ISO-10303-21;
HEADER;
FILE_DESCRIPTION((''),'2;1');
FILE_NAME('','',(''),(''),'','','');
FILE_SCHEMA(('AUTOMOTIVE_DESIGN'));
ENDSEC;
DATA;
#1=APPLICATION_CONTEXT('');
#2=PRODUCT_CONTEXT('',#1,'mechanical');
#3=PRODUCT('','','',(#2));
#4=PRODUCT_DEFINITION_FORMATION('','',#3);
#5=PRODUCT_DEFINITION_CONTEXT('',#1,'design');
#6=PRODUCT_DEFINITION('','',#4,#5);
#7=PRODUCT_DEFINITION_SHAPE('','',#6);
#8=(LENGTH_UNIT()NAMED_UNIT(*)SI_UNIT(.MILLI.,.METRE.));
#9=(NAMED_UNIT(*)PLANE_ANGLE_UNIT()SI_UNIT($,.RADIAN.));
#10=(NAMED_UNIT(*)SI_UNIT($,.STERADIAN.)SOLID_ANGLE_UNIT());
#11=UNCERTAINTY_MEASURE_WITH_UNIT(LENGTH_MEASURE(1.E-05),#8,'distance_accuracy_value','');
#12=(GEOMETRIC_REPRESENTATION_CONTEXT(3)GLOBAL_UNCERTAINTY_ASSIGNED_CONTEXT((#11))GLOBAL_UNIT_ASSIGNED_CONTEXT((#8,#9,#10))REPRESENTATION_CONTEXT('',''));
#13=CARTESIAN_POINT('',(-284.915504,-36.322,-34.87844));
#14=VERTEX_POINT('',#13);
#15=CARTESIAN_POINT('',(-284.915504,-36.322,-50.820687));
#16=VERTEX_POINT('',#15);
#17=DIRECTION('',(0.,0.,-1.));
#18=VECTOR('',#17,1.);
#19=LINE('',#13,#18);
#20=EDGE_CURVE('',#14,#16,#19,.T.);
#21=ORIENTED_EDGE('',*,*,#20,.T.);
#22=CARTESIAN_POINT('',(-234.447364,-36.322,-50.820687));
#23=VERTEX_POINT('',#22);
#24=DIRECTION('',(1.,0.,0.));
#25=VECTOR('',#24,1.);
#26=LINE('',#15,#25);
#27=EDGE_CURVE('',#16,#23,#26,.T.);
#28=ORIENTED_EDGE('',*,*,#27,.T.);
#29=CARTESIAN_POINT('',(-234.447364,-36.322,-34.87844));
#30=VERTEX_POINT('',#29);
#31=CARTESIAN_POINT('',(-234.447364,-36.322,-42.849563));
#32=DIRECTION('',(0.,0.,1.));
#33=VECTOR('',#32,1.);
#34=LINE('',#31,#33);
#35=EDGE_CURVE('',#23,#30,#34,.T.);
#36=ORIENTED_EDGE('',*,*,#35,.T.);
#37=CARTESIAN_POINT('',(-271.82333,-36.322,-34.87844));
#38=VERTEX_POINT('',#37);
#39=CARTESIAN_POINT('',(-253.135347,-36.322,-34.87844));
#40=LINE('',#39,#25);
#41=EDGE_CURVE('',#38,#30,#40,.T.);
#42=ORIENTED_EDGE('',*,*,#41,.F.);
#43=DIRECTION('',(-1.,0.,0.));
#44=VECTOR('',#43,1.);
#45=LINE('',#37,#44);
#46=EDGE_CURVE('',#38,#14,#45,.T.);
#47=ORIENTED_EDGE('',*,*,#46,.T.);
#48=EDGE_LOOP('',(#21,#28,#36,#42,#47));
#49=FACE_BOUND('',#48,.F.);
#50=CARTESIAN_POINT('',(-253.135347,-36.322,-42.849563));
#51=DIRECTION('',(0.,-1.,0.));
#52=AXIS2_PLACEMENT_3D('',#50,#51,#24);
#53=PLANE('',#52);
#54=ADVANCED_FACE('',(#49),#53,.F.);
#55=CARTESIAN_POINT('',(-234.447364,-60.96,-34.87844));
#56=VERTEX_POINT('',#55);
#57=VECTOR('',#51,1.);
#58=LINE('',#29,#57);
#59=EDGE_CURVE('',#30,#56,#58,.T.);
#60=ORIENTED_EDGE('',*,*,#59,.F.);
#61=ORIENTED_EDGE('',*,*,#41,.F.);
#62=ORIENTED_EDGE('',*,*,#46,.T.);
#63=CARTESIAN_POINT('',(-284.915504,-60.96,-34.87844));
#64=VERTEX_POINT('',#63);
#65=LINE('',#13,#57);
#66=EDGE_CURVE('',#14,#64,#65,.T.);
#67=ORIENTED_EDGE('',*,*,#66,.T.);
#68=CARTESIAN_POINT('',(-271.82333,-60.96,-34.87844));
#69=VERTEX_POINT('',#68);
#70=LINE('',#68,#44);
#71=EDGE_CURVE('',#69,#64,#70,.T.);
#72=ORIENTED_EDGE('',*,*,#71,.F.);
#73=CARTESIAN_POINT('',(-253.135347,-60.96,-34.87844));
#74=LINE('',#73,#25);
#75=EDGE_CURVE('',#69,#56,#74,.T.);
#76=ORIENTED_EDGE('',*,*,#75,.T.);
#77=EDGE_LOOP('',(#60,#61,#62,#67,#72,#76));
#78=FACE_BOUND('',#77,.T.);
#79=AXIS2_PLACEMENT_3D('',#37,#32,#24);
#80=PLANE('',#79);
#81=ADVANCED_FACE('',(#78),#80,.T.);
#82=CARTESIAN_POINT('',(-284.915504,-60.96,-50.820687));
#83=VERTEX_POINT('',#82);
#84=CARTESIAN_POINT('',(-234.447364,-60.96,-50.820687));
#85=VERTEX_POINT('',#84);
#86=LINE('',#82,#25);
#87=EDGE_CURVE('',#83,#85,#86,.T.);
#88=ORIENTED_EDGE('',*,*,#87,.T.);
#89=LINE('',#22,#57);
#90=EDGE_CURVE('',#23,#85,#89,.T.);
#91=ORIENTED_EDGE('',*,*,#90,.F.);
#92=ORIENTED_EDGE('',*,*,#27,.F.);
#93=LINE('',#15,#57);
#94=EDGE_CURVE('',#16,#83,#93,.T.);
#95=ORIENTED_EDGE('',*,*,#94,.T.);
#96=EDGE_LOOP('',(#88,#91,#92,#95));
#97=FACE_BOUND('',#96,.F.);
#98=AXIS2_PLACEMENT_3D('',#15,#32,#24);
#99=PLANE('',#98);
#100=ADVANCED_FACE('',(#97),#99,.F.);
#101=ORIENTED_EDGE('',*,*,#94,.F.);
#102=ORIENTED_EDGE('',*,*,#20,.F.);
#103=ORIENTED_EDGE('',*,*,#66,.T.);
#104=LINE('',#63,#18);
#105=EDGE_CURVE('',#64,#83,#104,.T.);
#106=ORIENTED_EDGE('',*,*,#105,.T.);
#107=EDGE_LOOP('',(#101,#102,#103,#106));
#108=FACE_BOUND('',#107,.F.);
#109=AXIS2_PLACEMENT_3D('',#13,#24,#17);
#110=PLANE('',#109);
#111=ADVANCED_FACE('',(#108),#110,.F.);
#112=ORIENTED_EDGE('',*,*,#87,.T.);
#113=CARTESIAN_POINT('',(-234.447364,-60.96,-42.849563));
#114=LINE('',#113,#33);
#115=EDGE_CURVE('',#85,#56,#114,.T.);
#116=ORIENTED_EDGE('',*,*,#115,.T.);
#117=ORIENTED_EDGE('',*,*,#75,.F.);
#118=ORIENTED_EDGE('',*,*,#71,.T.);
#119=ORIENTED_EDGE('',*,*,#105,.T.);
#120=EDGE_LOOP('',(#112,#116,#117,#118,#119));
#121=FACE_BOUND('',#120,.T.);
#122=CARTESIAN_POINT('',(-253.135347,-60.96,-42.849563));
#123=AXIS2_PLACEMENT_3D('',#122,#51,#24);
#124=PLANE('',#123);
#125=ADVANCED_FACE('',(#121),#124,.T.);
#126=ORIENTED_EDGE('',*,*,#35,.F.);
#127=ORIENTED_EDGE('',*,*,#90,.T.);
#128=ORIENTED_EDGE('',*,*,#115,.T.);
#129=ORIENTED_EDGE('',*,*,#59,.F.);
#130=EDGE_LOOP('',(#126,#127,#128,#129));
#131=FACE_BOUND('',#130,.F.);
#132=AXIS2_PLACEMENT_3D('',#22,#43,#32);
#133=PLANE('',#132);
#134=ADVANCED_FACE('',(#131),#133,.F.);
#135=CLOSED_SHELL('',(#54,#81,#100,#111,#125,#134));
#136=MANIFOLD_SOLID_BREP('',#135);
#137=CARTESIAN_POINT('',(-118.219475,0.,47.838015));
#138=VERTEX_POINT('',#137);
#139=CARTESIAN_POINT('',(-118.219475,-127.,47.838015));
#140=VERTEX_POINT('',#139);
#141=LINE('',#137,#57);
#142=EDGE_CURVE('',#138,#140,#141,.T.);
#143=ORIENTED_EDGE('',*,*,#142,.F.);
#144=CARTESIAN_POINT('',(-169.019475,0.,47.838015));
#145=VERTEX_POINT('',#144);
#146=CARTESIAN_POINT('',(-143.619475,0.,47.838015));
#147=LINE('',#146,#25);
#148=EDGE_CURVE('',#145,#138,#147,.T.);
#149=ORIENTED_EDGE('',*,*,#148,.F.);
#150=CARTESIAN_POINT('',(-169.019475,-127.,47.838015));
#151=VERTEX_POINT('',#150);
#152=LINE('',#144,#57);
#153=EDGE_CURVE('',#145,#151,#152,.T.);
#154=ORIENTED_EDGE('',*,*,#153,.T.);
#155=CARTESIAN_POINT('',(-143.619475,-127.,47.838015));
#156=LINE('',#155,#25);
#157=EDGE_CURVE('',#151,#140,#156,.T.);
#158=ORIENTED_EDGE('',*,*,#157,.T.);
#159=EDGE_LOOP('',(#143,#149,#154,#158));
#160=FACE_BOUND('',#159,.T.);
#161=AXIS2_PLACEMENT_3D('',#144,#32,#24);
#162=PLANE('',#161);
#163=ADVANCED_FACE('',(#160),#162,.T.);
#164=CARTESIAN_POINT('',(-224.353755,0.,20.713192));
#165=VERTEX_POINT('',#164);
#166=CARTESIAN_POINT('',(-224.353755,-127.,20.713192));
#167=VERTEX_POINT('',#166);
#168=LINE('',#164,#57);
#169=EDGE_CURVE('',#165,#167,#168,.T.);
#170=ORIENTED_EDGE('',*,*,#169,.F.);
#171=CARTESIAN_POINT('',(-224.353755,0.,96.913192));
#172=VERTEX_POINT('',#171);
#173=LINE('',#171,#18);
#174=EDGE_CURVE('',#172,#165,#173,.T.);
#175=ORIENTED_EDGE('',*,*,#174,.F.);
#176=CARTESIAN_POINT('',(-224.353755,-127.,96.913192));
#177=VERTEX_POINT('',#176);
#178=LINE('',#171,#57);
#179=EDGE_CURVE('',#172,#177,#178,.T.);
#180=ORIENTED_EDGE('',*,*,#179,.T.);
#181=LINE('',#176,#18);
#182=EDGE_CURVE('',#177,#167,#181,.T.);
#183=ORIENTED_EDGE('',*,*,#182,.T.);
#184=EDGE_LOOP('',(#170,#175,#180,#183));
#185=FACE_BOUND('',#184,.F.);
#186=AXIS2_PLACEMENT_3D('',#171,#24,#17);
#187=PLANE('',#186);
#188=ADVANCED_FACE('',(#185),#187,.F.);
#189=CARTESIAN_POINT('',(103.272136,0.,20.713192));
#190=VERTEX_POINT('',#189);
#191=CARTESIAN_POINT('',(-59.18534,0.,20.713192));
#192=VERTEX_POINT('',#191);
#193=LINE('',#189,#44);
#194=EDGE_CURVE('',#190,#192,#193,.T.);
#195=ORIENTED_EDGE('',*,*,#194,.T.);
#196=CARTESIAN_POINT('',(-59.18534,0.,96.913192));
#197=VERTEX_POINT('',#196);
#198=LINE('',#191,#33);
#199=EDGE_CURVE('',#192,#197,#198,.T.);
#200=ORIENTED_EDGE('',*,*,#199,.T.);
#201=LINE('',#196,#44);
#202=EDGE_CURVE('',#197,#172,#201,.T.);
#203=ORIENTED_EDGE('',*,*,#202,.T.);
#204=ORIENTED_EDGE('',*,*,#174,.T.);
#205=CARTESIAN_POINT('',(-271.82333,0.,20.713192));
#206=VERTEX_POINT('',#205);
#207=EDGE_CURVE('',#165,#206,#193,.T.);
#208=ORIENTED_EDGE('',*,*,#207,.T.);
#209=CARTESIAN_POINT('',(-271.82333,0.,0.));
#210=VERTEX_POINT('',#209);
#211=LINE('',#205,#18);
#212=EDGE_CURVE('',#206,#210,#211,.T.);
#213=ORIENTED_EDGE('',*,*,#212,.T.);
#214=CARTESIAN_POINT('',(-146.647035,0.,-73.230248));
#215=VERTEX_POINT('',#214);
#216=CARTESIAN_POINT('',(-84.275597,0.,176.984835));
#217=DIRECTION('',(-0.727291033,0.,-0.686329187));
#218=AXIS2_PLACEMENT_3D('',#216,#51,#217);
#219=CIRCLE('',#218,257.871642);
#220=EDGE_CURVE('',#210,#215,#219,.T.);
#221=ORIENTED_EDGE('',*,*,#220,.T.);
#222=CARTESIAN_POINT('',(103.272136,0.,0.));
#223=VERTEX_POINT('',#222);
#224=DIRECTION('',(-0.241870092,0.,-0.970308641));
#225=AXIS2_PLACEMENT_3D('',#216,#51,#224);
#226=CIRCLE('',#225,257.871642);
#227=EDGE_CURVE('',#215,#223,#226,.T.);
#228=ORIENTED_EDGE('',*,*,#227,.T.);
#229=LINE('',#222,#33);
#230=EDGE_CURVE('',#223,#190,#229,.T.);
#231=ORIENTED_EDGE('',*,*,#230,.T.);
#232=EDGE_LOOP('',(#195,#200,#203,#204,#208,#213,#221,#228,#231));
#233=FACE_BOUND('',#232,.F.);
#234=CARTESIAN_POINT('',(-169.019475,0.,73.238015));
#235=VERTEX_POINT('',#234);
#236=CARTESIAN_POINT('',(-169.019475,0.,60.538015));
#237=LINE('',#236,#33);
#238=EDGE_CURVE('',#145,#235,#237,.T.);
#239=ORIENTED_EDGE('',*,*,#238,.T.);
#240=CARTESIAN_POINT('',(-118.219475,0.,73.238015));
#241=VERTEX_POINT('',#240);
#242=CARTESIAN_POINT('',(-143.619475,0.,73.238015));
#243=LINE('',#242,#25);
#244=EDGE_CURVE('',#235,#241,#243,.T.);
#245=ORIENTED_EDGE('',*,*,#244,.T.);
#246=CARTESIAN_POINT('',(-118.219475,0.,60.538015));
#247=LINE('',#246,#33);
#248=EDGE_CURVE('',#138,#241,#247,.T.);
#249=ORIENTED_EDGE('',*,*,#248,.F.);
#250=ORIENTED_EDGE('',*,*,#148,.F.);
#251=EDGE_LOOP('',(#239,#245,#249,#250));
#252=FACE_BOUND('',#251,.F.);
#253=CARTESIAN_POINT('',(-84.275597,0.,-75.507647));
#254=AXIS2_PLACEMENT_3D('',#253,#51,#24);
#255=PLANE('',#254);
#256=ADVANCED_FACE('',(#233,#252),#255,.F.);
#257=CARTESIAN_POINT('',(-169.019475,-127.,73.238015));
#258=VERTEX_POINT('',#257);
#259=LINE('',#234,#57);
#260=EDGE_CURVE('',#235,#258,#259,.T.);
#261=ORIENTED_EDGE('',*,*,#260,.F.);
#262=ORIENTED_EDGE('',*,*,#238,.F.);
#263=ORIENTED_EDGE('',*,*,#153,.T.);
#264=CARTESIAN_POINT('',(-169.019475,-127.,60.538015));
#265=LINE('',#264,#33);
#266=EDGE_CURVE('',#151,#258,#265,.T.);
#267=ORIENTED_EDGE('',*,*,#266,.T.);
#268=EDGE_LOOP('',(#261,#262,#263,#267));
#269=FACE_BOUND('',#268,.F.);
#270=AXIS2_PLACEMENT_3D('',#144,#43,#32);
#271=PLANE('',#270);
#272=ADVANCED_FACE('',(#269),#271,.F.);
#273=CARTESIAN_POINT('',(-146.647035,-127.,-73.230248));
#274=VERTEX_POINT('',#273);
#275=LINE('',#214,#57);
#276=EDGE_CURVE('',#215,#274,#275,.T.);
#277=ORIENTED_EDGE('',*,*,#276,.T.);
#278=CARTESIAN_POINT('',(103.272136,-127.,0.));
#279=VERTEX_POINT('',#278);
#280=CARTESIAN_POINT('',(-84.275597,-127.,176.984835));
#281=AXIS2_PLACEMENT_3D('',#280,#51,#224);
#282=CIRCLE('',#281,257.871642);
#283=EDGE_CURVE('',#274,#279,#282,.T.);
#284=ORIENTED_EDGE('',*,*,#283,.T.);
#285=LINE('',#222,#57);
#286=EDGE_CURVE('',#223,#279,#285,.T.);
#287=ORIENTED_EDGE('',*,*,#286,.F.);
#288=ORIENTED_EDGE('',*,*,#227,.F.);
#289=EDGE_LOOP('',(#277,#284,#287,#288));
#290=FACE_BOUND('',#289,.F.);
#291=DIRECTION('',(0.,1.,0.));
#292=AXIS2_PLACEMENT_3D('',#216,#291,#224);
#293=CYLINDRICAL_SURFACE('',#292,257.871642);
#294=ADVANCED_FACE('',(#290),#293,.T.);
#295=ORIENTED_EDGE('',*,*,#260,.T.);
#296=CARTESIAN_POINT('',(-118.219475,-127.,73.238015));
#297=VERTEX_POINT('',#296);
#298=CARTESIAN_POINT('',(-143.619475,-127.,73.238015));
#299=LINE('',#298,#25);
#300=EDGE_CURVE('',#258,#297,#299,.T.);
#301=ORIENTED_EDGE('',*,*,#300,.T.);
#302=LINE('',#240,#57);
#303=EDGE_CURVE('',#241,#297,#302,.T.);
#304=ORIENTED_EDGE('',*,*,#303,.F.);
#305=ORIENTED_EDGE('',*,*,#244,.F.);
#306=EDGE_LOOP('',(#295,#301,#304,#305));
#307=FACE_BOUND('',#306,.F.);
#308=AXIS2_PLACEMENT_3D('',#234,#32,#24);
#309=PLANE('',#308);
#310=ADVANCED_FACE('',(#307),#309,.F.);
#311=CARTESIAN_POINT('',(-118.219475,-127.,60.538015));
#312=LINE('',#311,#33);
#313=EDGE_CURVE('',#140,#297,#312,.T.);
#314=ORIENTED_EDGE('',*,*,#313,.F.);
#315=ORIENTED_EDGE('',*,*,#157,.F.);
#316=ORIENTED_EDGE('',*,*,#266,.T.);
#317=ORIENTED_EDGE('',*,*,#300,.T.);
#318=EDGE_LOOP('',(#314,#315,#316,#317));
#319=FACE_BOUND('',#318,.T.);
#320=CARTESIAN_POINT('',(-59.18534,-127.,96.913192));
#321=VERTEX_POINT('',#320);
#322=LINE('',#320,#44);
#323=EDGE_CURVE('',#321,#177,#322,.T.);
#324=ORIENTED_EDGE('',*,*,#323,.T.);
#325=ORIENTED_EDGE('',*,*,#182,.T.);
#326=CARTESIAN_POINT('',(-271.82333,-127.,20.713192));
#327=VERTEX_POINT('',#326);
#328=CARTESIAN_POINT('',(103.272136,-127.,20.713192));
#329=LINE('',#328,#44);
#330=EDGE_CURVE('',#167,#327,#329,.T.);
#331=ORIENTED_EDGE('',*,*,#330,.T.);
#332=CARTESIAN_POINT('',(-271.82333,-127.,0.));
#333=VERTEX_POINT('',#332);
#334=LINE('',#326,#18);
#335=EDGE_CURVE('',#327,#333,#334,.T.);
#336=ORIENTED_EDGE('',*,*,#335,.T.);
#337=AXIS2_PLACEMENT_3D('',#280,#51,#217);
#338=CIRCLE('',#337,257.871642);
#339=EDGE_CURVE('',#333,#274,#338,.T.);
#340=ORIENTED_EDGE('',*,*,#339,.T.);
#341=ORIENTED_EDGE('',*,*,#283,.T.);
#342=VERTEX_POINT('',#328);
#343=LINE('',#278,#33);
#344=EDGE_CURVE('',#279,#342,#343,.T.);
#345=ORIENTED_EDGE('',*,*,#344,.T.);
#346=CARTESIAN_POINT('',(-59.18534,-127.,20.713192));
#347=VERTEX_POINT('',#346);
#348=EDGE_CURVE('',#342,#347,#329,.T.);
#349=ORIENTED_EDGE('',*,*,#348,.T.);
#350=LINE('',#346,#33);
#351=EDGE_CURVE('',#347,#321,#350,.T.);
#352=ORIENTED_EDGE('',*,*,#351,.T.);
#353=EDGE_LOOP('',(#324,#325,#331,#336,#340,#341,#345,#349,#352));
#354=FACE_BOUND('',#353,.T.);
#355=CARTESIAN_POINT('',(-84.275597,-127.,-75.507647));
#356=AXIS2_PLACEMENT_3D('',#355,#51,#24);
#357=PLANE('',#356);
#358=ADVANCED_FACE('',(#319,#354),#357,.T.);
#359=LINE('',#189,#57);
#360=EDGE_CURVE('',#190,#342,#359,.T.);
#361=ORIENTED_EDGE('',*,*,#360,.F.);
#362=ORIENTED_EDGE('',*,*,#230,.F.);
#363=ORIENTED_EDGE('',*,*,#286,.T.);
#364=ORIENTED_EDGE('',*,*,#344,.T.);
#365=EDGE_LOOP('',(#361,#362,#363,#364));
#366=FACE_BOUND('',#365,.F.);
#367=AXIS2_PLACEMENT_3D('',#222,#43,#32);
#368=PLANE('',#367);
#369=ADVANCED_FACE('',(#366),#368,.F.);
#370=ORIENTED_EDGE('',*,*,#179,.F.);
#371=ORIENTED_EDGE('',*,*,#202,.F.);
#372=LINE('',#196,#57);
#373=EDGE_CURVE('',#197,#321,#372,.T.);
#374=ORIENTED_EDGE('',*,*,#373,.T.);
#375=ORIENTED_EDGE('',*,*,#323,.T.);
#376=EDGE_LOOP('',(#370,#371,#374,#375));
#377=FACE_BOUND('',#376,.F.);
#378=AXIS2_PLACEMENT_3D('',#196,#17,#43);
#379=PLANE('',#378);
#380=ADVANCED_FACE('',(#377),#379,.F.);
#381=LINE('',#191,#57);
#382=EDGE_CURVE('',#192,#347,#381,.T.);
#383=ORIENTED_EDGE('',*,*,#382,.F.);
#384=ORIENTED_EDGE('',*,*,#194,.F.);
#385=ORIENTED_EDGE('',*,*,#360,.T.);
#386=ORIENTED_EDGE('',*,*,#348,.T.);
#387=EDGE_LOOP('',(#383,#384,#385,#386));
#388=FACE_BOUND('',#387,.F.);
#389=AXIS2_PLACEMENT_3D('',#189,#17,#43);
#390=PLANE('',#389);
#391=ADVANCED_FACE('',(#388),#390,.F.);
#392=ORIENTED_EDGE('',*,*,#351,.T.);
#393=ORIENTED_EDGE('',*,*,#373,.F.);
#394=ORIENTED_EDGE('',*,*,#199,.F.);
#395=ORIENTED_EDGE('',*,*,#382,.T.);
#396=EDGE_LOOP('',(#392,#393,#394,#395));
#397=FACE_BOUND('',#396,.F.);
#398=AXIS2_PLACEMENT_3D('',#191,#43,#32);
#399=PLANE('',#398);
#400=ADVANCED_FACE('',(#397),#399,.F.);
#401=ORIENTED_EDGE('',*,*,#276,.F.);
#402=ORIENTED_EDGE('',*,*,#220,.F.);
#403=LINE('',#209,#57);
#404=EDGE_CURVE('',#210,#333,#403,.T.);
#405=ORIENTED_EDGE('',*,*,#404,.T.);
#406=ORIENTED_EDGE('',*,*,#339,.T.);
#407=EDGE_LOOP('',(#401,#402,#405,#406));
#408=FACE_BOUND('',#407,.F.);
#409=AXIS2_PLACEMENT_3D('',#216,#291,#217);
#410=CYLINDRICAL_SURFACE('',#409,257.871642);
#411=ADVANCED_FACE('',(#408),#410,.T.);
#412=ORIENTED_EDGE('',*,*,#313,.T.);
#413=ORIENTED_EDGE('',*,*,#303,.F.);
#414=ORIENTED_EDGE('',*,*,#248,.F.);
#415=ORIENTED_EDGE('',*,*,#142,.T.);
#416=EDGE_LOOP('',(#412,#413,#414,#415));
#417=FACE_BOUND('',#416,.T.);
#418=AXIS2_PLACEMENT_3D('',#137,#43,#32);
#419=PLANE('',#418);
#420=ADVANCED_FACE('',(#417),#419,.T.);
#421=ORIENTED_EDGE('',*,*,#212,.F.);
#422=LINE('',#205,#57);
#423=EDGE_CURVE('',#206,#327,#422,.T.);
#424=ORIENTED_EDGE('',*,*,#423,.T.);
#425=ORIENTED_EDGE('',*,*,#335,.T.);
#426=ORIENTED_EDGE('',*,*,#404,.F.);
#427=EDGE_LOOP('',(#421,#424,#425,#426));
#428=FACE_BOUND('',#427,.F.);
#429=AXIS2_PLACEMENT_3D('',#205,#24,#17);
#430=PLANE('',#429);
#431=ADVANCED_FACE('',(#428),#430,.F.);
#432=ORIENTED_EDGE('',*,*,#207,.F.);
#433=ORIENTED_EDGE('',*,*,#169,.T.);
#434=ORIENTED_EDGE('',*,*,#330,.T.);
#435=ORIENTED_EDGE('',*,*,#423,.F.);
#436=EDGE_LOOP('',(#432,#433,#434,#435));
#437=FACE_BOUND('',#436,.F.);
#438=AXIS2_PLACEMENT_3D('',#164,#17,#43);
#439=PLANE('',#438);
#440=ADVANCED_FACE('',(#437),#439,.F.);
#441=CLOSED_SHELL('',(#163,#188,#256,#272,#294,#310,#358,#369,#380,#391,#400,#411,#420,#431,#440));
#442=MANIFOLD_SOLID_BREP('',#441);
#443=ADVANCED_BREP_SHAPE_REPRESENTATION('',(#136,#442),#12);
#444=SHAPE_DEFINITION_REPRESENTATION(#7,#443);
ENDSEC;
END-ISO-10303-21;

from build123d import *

# Parameters (mm, degrees)
F1_DEPTH = 127
F0_W     = 50.8
F0_H     = 25.4
F2_START = 36.322
F0_W_2   = 37.3759667383
F0_H_2   = 15.9422476888
F2_DEPTH = 24.638


# Not quite as in the source:
# - a feature names something its author has since deleted; it is built from what else it names


with BuildPart() as f1:
    # F0 (on Front) → F1 (new body)
    with BuildSketch(Plane.XZ):
        Polygon((-307.3281569301, -41.3140561762), (-306.4012624873, -41.288353515), (-306.7446031917, -40.692556251), align=None)
    extrude(amount=F1_DEPTH)


with BuildPart() as f1b:
    # F0 (on Front) → F1, piece 2 (new body)
    with BuildSketch(Plane.XZ):
        with BuildLine():
            Line((-21.9041593159, -73.2302481236), (-146.6470350679, -73.2302481236))
            ThreePointArc((-146.6470350679, -73.2302481236), (-84.2755971919, -80.8868076681), (-21.9041593159, -73.2302481236))
        make_face()
        Polygon((-224.3537551874, 96.9131923319), (-224.3537551874, 20.7131923319), (-197.7432811606, 20.7131923319), (-83.9606040237, 20.7131923319), (-59.1853400261, 20.7131923319), (-59.1853400261, 96.9131923319), (-160.1215863499, 96.9131923319), (-161.9567914552, 96.9131923319), align=None)
        with Locations((-143.6194745734, 60.5380154436)):
            Rectangle(F0_W, F0_H, mode=Mode.SUBTRACT)
        with BuildLine():
            Line((-224.3537551874, 20.7131923319), (-271.8233303091, 20.7131923319))
            Line((-271.8233303091, 20.7131923319), (-271.8233303091, 0))
            ThreePointArc((-271.8233303091, 0), (-214.4891345739, -45.5959789578), (-146.6470350679, -73.2302481236))
            Line((-146.6470350679, -73.2302481236), (-21.9041593159, -73.2302481236))
            ThreePointArc((-21.9041593159, -73.2302481236), (45.9379401902, -45.5959789578), (103.2721359253, 0))
            Line((103.2721359253, 0), (103.2721359253, 20.7131923319))
            Line((103.2721359253, 20.7131923319), (-59.1853400261, 20.7131923319))
            Line((-59.1853400261, 20.7131923319), (-83.9606040237, 20.7131923319))
            Line((-83.9606040237, 20.7131923319), (-197.7432811606, 20.7131923319))
            Line((-197.7432811606, 20.7131923319), (-224.3537551874, 20.7131923319))
        make_face()
    extrude(amount=F1_DEPTH)


with BuildPart() as f2:
    # F0 (on Front) → F2 (new body)
    with BuildSketch(Plane.XZ.offset(F2_START)):
        with Locations((-253.13534694, -42.8495634074)):
            Rectangle(F0_W_2, F0_H_2)
        Polygon((-271.8233303091, -50.8206872518), (-271.8233303091, -34.8784395629), (-284.9155039664, -34.8784395629), (-284.9155039664, -40.692556251), (-284.9155039664, -50.8206872518), align=None)
    extrude(amount=F2_DEPTH)


solid = Compound([f1b.part, f2.part])
